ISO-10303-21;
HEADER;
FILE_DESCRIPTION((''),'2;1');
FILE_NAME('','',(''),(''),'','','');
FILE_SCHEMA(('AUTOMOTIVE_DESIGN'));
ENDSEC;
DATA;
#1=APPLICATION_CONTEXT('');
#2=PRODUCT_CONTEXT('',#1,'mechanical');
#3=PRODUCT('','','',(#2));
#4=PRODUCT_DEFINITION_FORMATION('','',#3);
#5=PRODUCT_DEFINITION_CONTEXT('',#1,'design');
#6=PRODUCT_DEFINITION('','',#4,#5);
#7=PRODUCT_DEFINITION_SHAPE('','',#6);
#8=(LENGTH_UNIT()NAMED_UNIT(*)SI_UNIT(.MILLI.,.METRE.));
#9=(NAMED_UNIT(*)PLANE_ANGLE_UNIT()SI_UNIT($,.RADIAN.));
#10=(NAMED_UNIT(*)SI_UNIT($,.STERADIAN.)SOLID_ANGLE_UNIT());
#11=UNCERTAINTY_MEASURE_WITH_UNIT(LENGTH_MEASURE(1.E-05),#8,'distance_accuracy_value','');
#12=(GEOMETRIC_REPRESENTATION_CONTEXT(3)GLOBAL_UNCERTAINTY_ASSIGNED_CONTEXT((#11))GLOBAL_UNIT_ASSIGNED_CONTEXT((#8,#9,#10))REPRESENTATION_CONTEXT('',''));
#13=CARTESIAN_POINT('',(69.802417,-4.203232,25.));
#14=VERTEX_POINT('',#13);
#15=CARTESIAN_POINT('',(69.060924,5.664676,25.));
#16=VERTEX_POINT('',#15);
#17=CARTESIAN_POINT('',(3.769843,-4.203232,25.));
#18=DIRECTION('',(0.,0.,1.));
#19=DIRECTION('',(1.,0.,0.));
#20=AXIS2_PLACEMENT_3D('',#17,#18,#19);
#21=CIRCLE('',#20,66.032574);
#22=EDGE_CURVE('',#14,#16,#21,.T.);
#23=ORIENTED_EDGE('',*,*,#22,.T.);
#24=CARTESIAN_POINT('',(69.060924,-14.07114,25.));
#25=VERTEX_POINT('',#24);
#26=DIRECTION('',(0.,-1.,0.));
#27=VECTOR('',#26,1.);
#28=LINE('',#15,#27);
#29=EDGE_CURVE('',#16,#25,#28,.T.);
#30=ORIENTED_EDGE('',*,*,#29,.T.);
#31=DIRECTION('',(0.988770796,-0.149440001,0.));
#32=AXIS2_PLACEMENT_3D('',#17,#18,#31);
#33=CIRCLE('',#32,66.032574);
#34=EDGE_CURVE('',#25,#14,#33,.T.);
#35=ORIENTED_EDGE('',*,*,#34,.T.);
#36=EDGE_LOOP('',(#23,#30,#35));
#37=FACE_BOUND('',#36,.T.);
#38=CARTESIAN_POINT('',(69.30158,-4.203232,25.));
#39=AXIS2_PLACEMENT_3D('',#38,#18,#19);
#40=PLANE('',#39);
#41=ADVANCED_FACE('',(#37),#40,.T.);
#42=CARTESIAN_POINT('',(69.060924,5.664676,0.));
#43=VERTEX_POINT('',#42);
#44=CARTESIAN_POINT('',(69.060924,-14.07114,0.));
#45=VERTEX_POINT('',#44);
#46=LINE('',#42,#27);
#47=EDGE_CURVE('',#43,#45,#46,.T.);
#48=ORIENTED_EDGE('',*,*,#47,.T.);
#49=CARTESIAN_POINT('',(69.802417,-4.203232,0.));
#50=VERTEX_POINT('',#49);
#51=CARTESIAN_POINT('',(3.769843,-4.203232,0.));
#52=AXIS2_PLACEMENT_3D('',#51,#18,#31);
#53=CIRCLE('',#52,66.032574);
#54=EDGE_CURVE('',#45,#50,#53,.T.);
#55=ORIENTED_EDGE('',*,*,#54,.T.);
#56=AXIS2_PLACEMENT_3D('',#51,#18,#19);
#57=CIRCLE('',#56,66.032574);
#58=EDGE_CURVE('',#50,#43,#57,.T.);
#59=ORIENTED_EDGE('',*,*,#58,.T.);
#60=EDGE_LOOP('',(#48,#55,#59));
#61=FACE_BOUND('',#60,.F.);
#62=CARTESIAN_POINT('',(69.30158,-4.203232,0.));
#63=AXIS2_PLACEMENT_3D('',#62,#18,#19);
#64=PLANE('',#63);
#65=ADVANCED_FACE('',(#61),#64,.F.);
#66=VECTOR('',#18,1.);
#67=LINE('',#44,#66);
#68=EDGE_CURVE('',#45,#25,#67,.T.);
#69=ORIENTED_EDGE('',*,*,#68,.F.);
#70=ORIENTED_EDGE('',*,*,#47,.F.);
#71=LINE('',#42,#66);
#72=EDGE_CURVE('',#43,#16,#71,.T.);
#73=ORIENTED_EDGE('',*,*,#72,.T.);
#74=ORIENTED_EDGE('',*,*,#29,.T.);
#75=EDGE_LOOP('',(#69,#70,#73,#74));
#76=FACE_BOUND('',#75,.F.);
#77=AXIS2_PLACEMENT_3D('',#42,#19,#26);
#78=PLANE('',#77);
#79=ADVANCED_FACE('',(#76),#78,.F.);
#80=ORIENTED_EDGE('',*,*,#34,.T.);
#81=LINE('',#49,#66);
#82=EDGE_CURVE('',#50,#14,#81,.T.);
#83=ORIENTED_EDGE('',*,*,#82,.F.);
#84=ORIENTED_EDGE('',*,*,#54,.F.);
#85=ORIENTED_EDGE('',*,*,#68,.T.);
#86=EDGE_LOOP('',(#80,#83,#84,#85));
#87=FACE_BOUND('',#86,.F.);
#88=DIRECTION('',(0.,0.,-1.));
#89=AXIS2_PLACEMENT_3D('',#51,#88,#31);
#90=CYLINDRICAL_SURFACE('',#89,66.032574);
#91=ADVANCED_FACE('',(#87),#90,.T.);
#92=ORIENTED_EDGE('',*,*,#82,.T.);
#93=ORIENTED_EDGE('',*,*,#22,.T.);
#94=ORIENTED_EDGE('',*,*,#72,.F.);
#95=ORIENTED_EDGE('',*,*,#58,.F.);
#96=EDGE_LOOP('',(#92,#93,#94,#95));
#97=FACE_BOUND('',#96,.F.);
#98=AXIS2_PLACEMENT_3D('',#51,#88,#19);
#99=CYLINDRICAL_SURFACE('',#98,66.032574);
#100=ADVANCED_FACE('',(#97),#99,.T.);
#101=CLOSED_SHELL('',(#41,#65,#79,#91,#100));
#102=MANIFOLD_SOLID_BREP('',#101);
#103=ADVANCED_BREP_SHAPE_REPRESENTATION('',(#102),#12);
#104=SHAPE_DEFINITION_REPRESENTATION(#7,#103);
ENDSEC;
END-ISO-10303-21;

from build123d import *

# Parameters (mm, degrees)
F1_DEPTH = 25


with BuildPart() as f1:
    # F0 (on Top) → F1 (new body)
    with BuildSketch(Plane.XY):
        with BuildLine():
            ThreePointArc((69.0609236135, -14.071139842), (69.6167826315, -9.1510956185), (69.8024168807, -4.2032320052))
            ThreePointArc((69.8024168807, -4.2032320052), (69.6167826315, 0.744631608), (69.0609236135, 5.6646758315))
            Line((69.0609236135, 5.6646758315), (69.0609236135, -14.071139842))
        make_face()
    extrude(amount=F1_DEPTH)


solid = f1.part
